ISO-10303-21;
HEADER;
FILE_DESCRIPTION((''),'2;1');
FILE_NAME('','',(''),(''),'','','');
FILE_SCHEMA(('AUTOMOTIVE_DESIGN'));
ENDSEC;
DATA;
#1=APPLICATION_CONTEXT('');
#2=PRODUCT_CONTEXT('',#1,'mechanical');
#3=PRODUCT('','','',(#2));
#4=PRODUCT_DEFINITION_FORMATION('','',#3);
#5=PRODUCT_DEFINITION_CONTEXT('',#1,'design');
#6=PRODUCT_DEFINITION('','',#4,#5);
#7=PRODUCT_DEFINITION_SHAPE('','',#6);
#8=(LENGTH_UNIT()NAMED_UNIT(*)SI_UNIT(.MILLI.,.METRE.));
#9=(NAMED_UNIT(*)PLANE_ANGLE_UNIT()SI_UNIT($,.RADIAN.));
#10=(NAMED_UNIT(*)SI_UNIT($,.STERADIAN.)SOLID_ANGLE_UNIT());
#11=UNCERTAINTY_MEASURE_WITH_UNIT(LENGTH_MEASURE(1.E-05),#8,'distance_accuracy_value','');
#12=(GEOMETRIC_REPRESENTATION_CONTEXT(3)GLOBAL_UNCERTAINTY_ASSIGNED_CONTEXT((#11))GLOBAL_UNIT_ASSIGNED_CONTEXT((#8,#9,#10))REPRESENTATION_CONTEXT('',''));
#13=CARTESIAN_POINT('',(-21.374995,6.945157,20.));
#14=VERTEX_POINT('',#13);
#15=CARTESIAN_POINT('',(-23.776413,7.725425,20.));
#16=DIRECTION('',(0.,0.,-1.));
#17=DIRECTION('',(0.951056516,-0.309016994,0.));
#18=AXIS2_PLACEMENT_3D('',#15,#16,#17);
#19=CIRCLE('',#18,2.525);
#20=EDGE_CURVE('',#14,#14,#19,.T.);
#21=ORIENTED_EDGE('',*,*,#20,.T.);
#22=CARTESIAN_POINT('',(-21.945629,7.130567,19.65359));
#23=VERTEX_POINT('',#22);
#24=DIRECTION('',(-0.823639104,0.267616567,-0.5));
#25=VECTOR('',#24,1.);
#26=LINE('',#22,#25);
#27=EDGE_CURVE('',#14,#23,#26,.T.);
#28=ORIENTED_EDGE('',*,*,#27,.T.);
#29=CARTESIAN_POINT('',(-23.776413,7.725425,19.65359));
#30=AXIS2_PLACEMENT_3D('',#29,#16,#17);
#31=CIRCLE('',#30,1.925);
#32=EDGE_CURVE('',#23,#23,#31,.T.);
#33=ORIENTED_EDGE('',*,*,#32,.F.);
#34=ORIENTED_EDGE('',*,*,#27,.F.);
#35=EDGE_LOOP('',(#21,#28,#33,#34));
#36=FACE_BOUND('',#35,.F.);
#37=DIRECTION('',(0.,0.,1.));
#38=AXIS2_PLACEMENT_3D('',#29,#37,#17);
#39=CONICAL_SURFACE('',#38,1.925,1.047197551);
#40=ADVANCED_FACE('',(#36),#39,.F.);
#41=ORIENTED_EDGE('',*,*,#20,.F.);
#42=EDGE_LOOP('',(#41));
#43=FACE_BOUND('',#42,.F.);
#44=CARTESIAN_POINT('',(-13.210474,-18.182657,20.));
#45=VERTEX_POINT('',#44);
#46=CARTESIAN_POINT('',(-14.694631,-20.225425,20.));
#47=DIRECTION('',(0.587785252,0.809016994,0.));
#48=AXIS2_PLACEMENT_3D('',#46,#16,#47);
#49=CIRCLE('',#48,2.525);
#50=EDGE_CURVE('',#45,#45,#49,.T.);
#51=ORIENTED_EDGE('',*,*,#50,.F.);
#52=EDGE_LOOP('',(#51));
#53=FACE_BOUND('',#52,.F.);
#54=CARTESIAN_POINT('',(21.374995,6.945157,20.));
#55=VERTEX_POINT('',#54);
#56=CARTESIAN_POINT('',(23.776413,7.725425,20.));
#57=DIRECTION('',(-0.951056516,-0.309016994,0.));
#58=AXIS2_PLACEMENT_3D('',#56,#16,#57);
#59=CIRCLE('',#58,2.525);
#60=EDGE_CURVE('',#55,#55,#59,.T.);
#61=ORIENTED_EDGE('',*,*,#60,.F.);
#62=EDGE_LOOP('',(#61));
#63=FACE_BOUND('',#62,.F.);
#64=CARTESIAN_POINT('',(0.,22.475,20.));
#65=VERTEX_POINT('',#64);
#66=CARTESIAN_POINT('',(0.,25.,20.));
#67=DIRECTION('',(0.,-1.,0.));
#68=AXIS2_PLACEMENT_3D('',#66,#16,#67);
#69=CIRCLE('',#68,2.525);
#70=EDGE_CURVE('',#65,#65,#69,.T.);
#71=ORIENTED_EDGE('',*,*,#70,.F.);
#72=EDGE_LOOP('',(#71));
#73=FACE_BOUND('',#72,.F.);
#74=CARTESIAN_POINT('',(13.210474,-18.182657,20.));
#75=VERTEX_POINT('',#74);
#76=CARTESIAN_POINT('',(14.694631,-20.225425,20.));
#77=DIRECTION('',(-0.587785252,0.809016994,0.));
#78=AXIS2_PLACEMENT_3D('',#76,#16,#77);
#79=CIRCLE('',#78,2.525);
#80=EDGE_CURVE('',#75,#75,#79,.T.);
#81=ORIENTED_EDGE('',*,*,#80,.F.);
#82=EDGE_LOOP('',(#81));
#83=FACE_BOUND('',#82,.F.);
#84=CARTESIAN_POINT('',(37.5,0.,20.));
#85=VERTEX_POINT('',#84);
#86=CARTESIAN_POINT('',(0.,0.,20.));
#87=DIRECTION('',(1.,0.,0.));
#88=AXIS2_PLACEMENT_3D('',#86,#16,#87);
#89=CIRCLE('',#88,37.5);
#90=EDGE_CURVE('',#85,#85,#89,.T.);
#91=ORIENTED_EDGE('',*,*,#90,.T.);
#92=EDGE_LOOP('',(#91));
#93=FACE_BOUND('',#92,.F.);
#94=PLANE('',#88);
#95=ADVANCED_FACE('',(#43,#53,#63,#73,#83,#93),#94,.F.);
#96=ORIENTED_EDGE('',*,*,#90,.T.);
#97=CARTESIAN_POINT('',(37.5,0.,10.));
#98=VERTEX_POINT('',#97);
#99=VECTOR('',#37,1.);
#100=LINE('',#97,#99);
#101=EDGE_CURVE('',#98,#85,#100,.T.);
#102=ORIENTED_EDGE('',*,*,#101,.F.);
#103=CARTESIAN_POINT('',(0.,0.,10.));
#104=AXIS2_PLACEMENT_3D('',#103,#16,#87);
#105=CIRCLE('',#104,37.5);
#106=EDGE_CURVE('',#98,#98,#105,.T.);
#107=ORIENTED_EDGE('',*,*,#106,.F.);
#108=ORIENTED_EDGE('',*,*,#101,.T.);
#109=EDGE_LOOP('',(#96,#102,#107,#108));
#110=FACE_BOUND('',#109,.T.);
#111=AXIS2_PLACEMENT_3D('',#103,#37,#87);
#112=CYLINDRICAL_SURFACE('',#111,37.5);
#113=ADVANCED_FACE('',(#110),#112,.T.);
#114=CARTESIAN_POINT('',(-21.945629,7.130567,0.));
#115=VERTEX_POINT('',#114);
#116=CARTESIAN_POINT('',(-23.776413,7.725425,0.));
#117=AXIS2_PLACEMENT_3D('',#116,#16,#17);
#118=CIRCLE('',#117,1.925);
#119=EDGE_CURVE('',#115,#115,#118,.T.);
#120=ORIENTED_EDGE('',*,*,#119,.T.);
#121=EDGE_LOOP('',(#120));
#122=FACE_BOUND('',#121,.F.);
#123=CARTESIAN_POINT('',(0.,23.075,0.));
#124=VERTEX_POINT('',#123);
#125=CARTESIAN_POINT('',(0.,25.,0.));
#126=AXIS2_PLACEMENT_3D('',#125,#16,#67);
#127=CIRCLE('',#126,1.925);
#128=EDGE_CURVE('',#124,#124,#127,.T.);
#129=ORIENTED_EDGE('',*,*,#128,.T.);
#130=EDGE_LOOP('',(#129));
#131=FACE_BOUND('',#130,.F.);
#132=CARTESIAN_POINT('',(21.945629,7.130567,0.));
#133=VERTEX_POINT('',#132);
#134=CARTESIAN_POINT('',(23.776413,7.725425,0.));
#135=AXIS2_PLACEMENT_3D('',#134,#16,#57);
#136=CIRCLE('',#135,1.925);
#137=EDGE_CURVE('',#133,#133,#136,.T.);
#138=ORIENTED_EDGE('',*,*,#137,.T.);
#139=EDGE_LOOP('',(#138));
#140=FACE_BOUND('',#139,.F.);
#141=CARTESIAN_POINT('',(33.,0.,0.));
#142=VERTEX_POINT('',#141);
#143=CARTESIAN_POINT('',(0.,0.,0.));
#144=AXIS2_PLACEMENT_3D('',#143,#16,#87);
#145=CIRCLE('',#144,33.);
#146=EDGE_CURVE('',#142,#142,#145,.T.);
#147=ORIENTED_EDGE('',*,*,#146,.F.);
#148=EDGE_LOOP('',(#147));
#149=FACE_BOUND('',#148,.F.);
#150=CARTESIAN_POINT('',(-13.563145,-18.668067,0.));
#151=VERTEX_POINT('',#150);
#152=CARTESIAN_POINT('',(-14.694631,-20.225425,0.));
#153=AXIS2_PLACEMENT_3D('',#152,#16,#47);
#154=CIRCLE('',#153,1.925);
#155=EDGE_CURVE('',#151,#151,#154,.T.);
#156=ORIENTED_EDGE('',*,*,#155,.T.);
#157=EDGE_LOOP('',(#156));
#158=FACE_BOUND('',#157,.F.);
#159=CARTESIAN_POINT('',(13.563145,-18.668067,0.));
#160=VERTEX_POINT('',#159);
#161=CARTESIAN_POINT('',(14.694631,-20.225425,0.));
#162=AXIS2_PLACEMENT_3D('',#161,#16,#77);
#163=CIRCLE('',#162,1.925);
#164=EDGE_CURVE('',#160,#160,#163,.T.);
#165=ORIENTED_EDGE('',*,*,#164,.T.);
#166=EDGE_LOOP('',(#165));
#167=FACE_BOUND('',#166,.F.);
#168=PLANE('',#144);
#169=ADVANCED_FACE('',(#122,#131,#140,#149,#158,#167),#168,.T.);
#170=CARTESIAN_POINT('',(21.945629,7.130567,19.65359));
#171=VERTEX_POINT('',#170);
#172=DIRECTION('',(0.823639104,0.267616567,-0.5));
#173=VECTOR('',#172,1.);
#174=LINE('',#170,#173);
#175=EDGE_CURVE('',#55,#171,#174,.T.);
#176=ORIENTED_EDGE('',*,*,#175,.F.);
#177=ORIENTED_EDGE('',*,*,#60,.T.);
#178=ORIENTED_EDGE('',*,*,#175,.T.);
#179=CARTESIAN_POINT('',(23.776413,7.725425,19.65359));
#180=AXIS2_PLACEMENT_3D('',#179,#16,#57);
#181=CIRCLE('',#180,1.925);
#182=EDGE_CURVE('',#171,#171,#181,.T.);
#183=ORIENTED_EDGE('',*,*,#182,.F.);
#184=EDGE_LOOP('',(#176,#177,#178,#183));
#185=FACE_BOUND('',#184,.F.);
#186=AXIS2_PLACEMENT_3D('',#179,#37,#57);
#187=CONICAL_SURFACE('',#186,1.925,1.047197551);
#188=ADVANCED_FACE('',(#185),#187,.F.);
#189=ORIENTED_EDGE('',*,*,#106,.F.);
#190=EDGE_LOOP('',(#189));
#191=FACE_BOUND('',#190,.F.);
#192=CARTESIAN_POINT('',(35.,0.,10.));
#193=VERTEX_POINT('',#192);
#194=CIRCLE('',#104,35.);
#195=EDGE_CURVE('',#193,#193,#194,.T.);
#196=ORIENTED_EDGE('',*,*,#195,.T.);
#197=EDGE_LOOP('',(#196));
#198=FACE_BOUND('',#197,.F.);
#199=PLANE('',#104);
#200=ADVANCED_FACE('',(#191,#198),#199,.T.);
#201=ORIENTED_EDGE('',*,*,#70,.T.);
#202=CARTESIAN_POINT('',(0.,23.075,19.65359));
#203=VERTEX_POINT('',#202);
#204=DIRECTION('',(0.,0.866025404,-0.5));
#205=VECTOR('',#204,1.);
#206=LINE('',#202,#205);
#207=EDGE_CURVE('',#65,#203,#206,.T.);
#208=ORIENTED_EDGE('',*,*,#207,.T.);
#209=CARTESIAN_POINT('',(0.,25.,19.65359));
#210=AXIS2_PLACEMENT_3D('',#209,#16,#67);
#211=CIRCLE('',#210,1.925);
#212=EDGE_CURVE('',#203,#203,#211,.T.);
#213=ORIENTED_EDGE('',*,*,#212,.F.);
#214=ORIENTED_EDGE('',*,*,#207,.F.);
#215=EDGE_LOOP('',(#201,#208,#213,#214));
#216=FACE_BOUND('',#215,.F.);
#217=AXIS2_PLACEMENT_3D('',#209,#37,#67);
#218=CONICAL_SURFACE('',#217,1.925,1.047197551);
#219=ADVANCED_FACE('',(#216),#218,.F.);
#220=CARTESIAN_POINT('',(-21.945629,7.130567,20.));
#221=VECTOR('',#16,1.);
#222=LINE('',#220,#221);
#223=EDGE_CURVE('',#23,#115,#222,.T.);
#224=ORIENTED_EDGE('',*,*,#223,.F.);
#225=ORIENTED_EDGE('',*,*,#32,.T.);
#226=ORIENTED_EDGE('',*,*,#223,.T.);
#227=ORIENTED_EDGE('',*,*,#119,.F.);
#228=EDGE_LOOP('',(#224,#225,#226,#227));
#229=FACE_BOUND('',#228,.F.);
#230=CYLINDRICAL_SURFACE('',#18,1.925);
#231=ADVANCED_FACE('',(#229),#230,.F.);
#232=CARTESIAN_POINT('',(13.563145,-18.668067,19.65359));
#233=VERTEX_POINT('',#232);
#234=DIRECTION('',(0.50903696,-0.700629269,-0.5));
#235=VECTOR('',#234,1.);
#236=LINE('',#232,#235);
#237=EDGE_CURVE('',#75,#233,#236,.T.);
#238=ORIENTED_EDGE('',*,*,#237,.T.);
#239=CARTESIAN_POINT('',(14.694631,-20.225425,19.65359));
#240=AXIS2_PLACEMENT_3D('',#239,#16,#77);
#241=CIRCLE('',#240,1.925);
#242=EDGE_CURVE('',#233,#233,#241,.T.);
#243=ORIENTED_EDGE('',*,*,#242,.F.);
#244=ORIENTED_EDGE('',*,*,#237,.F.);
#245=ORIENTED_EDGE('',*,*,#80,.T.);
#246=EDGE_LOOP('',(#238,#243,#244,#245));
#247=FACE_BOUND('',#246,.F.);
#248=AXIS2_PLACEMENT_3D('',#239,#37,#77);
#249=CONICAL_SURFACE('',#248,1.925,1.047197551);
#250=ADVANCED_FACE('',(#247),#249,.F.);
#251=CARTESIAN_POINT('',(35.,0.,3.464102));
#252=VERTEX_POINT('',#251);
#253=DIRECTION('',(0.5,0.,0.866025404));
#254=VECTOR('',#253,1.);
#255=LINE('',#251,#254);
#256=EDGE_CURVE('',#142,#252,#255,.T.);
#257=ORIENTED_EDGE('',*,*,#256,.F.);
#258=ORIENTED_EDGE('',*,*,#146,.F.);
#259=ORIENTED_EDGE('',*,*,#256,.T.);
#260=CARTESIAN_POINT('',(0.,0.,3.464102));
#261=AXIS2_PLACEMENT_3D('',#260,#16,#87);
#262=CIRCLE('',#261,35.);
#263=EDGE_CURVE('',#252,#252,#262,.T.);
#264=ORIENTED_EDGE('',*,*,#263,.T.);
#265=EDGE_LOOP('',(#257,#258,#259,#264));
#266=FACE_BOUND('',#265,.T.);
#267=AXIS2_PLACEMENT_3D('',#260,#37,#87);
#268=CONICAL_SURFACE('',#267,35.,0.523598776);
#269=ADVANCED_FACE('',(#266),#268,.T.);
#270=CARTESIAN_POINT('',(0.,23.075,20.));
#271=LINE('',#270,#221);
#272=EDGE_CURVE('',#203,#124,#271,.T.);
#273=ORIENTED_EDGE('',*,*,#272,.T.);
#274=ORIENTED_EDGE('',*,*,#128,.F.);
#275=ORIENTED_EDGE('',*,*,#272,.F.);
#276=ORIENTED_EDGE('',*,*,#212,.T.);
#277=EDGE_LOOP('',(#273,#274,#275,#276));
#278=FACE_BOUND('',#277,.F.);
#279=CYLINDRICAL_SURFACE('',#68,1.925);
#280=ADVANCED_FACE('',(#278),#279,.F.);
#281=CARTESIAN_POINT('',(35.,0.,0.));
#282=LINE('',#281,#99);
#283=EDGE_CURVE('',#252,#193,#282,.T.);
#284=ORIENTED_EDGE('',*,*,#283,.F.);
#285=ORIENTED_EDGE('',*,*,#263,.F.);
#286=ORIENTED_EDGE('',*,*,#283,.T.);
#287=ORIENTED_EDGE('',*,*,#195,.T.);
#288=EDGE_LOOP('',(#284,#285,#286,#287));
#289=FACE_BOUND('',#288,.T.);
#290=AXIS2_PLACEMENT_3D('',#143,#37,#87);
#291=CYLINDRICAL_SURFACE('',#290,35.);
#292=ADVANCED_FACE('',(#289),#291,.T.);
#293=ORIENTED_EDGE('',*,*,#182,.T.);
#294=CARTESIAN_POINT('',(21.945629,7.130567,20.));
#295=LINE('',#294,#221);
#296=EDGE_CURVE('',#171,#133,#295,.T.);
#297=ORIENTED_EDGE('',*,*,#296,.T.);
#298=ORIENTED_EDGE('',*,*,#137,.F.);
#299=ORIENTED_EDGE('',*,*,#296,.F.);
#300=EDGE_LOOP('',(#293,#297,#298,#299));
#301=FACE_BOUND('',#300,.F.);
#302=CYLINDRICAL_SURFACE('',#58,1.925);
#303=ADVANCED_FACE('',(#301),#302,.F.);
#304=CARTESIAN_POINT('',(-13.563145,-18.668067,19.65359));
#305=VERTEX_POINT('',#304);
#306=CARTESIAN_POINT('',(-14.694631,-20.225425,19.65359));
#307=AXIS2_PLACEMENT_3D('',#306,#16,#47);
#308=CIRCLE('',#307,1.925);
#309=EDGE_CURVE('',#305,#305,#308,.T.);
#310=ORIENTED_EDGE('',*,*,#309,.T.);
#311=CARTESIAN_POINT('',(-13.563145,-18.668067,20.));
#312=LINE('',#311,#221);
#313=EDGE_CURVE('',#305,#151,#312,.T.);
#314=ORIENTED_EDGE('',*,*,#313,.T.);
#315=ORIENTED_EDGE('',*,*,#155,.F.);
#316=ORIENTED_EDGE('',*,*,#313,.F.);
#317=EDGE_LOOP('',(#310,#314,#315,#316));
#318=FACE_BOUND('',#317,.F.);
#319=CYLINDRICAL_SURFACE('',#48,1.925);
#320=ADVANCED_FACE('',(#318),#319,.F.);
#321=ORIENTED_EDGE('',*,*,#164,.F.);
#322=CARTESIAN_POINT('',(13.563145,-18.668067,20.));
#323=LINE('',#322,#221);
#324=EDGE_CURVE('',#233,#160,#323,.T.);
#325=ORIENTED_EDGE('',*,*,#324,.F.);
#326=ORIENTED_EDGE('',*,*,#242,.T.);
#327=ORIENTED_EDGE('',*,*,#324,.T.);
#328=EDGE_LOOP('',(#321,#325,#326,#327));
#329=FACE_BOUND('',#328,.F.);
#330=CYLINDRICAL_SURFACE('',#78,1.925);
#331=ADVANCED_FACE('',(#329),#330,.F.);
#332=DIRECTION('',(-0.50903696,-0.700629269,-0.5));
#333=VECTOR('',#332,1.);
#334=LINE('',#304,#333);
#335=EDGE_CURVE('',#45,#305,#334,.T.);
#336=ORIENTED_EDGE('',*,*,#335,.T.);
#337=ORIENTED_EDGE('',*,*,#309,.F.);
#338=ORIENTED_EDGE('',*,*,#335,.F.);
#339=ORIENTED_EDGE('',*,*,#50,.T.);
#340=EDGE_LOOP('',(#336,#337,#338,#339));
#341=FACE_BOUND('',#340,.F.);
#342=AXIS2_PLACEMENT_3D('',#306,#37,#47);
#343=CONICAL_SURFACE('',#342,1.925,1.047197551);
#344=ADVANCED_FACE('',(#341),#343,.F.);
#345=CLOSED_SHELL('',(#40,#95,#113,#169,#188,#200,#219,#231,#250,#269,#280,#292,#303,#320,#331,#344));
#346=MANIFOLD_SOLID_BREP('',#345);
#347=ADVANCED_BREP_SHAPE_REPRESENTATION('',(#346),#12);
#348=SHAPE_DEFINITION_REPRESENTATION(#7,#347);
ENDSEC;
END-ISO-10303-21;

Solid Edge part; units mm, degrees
sketch "Sketch1" plane through (0, 0, 0) normal (0, -1, 0) x (1, 0, 0)
  line L0 (0, 0) -> (35, 0)
  line L1 (35, 0) -> (35, 10)
  line L2 (35, 10) -> (37.5, 10)
  line L3 (37.5, 10) -> (37.5, 20)
  line L4 (37.5, 20) -> (0, 20)
  dimension "D1" = 10
  dimension "D2" = 10
revolve "RevolvedProtrusion1" add sketch "Sketch1" angle 360 about axis through (0, 0, 20) along (0, 0, -1)
hole "Hole_1" at (0, 25, 20) direction (0, 0, -1) diameter 3.85 depth 30 tip angle 118 start chamfer 0.6 start chamfer angle 60
pattern_circular "Pattern1" count 5 over 360 about axis through (0, 0, 20) along (0, 0, 1) of "Hole_1"
chamfer "Chamfer_1" distance 2 angle 60 1 edges at (-35, 0, 0) measured on face at (24.0333, 22.6333, 0)
properties material "Polyethylene, low density"
